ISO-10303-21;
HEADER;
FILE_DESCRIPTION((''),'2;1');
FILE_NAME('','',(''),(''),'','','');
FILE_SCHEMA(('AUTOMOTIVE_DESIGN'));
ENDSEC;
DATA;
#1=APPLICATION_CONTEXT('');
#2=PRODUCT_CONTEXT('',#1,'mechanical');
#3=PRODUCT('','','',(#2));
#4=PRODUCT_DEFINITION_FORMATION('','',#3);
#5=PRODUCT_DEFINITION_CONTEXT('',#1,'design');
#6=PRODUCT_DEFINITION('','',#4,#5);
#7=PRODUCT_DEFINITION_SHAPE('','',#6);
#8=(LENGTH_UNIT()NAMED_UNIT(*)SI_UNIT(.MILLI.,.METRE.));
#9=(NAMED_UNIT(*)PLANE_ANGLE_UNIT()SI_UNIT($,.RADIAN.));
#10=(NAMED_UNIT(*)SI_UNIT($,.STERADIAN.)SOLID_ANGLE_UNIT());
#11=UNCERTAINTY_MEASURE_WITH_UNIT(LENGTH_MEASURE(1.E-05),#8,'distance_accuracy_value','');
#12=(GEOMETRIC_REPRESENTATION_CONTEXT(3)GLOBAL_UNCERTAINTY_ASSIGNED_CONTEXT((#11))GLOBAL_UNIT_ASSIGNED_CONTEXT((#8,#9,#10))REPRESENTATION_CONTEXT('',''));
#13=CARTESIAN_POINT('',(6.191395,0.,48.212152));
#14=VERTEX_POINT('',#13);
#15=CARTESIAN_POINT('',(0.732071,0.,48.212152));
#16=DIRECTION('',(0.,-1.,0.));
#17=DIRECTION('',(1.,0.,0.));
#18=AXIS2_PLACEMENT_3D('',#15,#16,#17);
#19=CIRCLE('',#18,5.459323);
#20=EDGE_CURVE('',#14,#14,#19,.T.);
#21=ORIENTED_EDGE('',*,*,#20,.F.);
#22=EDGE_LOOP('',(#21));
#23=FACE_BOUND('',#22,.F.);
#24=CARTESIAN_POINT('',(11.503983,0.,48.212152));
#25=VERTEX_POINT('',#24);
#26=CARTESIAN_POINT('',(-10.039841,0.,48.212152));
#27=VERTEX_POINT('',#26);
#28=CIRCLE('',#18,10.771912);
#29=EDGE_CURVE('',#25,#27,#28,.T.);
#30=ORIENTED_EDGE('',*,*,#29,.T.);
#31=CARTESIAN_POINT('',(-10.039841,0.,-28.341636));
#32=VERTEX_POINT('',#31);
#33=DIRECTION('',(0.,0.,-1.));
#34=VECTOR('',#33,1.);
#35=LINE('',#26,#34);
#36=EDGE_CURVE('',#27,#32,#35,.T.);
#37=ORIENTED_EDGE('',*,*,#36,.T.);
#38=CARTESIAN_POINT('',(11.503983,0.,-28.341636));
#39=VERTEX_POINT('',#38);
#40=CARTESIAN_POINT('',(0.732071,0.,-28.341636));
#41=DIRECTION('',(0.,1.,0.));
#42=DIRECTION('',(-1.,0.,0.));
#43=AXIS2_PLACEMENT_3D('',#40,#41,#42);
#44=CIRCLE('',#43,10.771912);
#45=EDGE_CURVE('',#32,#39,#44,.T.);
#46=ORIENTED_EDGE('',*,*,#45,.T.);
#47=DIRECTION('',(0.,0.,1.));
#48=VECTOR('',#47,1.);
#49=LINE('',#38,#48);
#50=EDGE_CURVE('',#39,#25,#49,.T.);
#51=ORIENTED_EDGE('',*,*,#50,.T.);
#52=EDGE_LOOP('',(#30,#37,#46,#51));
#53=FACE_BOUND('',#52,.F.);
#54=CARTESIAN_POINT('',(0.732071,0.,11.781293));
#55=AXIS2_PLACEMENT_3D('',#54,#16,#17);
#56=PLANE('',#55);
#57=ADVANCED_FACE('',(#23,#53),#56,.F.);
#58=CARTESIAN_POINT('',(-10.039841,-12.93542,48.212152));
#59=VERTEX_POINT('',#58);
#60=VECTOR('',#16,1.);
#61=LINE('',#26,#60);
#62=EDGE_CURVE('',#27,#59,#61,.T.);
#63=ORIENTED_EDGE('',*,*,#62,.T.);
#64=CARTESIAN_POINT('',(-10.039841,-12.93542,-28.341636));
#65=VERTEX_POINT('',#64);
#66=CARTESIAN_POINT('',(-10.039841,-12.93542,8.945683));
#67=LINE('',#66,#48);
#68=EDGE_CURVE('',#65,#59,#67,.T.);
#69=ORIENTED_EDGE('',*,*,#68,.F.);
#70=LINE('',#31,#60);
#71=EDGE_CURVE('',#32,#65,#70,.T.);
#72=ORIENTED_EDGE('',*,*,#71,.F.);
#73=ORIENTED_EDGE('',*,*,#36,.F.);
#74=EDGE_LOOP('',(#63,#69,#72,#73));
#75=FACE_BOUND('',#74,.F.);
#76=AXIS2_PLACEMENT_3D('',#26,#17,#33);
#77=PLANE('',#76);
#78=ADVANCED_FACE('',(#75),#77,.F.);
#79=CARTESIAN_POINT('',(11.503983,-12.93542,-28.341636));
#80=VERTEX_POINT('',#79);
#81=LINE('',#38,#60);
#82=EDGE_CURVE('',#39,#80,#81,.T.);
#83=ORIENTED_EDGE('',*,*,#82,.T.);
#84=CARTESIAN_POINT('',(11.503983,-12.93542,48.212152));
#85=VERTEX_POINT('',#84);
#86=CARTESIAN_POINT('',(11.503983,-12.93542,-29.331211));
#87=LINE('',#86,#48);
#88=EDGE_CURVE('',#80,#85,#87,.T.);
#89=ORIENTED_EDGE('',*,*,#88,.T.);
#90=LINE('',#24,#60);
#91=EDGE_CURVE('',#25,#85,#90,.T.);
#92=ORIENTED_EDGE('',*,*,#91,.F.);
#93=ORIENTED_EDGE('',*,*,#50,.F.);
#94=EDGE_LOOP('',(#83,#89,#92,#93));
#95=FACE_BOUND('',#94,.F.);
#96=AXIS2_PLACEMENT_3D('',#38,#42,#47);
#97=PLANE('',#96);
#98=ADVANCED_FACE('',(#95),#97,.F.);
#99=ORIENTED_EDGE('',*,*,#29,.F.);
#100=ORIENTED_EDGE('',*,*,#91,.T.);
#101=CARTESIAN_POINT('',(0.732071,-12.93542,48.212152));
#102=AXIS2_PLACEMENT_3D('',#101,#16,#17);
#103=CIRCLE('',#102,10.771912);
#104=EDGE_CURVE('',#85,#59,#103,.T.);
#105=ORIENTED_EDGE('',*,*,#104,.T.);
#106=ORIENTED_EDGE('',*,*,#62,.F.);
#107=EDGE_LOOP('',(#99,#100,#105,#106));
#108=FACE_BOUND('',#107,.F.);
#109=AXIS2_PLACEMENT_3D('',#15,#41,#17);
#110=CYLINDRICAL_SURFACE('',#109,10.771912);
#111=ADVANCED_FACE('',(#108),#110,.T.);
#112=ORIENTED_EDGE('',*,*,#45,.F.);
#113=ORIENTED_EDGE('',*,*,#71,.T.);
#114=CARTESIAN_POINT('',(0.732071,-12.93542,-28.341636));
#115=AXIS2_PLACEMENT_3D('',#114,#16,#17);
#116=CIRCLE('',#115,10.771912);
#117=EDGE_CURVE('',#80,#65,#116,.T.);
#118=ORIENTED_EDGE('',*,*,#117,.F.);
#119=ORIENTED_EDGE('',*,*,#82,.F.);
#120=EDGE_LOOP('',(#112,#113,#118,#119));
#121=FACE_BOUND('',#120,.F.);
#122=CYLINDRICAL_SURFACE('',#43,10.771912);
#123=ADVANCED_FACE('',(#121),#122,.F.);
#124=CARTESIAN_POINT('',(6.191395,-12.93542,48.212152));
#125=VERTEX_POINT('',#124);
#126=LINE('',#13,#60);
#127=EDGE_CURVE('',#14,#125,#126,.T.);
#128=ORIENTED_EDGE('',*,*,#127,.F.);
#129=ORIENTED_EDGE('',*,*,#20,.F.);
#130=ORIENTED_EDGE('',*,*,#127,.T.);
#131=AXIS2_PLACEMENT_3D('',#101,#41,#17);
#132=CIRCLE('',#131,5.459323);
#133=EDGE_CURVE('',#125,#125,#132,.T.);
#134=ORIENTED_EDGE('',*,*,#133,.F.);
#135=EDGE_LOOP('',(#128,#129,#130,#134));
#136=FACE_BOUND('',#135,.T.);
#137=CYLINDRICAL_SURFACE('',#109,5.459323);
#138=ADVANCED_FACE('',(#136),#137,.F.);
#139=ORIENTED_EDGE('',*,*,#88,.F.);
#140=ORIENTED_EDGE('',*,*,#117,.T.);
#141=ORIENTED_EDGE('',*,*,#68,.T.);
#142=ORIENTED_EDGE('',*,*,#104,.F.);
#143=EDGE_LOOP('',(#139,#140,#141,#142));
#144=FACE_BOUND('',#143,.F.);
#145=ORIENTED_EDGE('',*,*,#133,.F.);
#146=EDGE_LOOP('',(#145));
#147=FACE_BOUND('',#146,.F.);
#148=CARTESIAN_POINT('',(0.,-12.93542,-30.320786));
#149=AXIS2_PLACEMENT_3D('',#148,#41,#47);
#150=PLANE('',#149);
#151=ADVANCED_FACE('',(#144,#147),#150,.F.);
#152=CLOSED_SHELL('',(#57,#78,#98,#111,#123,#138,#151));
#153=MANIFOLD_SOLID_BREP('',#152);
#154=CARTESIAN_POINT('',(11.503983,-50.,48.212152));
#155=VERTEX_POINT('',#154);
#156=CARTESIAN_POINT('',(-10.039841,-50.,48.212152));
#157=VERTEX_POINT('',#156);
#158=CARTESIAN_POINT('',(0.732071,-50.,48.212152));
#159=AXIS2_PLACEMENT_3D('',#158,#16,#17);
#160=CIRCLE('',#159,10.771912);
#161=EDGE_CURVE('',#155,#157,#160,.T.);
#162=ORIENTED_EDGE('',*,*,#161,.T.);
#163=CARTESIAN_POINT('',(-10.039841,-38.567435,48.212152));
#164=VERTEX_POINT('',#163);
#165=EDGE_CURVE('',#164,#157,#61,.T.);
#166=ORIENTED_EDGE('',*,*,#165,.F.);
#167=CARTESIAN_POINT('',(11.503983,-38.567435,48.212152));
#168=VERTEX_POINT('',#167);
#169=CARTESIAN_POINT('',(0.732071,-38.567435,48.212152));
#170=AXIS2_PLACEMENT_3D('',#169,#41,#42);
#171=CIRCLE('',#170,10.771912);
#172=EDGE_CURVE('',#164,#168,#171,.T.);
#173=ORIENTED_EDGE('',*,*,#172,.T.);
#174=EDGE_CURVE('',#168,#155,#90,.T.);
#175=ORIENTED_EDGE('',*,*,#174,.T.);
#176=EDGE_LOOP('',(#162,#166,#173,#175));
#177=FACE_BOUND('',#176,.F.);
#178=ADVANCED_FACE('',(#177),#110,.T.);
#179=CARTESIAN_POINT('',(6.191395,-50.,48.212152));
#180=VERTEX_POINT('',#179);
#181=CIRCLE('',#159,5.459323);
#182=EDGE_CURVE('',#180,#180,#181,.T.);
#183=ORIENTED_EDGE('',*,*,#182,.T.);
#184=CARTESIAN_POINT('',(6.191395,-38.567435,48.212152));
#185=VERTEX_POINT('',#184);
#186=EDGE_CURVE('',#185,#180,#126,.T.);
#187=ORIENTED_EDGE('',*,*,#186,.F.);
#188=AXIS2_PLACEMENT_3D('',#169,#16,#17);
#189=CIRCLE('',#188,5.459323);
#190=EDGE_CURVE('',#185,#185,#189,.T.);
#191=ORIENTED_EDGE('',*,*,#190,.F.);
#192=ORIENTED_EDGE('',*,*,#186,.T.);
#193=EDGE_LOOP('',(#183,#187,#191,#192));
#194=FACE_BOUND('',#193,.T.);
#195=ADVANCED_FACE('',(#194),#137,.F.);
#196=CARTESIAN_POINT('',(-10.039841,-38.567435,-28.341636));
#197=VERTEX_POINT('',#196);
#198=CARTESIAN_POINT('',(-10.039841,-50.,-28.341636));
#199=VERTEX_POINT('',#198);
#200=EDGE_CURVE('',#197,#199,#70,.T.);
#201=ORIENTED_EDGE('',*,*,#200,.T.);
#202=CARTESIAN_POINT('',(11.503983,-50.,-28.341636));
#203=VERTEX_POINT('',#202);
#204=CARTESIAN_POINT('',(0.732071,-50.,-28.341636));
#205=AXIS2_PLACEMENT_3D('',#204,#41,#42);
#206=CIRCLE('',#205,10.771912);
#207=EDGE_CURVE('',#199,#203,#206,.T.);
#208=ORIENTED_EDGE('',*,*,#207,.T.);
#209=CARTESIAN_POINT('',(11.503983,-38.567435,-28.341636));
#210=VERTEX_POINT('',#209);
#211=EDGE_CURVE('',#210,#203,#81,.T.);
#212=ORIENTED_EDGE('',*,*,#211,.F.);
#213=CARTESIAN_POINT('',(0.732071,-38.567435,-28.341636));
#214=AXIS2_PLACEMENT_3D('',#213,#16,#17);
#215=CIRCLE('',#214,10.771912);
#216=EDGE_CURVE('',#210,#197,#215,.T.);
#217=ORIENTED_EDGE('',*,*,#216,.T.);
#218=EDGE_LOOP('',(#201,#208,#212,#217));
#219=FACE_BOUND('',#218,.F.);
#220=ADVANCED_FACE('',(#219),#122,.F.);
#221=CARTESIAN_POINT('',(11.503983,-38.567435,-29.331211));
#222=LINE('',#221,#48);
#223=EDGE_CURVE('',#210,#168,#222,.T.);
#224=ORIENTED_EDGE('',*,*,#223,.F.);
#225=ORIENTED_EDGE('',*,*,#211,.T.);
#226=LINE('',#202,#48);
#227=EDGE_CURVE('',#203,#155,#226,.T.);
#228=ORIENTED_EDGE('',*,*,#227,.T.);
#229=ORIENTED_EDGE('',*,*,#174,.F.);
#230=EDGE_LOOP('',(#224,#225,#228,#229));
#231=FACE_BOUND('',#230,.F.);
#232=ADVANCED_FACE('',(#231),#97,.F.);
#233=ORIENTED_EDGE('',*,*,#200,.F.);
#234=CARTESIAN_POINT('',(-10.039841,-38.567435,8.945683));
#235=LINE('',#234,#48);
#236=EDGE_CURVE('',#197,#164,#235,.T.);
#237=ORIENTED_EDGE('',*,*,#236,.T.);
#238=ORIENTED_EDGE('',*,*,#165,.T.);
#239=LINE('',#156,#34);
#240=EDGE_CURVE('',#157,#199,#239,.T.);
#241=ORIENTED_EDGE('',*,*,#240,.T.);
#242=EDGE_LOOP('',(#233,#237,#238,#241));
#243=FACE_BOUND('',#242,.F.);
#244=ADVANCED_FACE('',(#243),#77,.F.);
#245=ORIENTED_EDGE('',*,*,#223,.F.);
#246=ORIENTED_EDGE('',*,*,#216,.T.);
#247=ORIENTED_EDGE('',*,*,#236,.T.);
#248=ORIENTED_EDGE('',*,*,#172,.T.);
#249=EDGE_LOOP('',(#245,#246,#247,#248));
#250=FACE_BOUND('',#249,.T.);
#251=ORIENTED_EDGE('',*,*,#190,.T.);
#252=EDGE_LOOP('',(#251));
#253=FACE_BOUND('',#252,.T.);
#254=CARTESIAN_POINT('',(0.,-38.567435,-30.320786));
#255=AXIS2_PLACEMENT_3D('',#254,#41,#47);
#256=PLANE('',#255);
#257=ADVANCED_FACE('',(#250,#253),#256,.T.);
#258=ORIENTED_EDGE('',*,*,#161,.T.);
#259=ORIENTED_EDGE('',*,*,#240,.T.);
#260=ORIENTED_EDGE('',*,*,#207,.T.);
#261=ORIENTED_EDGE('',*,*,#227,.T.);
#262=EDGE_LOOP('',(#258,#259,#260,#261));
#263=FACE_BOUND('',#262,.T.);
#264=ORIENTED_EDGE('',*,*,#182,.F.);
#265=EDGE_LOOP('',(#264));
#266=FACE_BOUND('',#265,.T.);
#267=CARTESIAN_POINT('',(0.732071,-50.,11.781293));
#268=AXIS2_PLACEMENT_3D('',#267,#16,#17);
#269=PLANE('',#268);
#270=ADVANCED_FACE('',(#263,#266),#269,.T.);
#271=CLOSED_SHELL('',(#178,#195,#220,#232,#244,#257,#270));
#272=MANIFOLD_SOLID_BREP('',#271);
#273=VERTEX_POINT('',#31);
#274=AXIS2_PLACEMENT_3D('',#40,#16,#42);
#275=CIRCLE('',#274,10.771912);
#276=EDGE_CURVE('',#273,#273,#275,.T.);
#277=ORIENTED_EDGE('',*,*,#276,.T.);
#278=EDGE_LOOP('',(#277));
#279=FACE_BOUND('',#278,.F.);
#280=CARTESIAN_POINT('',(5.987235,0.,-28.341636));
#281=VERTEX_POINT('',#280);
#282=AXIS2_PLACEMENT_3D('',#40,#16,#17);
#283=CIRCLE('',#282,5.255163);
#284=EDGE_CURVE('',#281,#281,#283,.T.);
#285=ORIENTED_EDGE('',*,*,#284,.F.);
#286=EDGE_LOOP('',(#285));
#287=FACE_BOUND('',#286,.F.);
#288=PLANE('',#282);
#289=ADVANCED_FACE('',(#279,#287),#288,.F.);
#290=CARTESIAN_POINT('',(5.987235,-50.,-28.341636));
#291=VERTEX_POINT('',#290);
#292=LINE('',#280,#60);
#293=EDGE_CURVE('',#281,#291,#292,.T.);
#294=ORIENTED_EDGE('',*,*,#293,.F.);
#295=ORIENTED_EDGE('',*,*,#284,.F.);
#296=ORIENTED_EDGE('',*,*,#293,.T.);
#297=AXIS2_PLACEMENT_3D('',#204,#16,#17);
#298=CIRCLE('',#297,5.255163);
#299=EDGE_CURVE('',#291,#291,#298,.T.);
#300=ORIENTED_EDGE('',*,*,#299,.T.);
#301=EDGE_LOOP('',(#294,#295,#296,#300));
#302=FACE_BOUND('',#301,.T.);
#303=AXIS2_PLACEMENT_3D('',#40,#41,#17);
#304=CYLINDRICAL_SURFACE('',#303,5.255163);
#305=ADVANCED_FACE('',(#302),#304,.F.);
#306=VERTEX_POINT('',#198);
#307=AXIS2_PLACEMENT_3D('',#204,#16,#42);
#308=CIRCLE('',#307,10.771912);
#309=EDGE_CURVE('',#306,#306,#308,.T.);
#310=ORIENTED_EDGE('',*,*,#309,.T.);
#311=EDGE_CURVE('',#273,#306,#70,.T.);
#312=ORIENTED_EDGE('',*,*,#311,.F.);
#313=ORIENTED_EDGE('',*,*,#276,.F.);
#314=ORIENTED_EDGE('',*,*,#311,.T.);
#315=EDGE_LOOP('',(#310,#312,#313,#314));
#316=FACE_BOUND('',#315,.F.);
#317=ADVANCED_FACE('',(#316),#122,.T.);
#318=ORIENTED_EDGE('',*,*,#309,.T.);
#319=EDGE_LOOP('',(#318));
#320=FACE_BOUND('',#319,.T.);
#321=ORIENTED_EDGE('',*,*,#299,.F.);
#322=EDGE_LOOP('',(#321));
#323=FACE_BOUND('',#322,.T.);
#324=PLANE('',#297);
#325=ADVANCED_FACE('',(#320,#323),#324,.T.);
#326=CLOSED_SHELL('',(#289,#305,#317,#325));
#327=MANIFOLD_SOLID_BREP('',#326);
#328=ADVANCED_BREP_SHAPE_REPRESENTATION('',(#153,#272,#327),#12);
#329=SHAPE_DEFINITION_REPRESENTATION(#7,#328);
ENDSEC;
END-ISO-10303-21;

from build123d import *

# Parameters (mm, degrees)
F0_R          = 5.4593234286
F4_DEPTH      = 50
F5_W          = 25.6320154294
F5_H          = 97.1445217729
F6_DEPTH      = 25
F6_DEPTH_BACK = 25
F0_R_2        = 5.255163488
F7_DEPTH      = 50


# Not quite as in the source:
# - a feature of the source that left no trace in its solid (it failed there, or was rolled back) is left out


with BuildPart() as f4:
    # F0 (on Front) → F4 (new body)
    with BuildSketch(Plane.XZ):
        with BuildLine():
            Line((-10.0398408249, 48.2121519744), (-10.0398408249, -28.3416360617))
            ThreePointArc((-10.0398408249, -28.3416360617), (0.7320712321, -17.5697240047), (11.503983289, -28.3416360617))
            Line((11.503983289, -28.3416360617), (11.503983289, 48.2121519744))
            ThreePointArc((11.503983289, 48.2121519744), (0.7320712321, 58.9840640314), (-10.0398408249, 48.2121519744))
        make_face()
        with Locations((0.7320712321, 48.2121519744)):
            Circle(F0_R, mode=Mode.SUBTRACT)
    extrude(amount=F4_DEPTH)

    # F5 (on Right) → F6 (cut, two sides)
    with BuildSketch(Plane.YZ) as f6_sk:
        with Locations((-25.7514272816, 18.2514749467)):
            Rectangle(F5_W, F5_H)
    extrude(amount=F6_DEPTH, mode=Mode.SUBTRACT)
    extrude(f6_sk.sketch, amount=-F6_DEPTH_BACK, mode=Mode.SUBTRACT)


with BuildPart() as f7:
    # F0 (on Front) → F7 (new body)
    with BuildSketch(Plane.XZ):
        with BuildLine():
            ThreePointArc((11.503983289, -28.3416360617), (0.7320712321, -17.5697240047), (-10.0398408249, -28.3416360617))
            ThreePointArc((-10.0398408249, -28.3416360617), (0.7320712321, -39.1135481186), (11.503983289, -28.3416360617))
        make_face()
        with Locations((0.7320712321, -28.3416360617)):
            Circle(F0_R_2, mode=Mode.SUBTRACT)
    extrude(amount=F7_DEPTH)


solid = Compound([f4.part, f7.part])
